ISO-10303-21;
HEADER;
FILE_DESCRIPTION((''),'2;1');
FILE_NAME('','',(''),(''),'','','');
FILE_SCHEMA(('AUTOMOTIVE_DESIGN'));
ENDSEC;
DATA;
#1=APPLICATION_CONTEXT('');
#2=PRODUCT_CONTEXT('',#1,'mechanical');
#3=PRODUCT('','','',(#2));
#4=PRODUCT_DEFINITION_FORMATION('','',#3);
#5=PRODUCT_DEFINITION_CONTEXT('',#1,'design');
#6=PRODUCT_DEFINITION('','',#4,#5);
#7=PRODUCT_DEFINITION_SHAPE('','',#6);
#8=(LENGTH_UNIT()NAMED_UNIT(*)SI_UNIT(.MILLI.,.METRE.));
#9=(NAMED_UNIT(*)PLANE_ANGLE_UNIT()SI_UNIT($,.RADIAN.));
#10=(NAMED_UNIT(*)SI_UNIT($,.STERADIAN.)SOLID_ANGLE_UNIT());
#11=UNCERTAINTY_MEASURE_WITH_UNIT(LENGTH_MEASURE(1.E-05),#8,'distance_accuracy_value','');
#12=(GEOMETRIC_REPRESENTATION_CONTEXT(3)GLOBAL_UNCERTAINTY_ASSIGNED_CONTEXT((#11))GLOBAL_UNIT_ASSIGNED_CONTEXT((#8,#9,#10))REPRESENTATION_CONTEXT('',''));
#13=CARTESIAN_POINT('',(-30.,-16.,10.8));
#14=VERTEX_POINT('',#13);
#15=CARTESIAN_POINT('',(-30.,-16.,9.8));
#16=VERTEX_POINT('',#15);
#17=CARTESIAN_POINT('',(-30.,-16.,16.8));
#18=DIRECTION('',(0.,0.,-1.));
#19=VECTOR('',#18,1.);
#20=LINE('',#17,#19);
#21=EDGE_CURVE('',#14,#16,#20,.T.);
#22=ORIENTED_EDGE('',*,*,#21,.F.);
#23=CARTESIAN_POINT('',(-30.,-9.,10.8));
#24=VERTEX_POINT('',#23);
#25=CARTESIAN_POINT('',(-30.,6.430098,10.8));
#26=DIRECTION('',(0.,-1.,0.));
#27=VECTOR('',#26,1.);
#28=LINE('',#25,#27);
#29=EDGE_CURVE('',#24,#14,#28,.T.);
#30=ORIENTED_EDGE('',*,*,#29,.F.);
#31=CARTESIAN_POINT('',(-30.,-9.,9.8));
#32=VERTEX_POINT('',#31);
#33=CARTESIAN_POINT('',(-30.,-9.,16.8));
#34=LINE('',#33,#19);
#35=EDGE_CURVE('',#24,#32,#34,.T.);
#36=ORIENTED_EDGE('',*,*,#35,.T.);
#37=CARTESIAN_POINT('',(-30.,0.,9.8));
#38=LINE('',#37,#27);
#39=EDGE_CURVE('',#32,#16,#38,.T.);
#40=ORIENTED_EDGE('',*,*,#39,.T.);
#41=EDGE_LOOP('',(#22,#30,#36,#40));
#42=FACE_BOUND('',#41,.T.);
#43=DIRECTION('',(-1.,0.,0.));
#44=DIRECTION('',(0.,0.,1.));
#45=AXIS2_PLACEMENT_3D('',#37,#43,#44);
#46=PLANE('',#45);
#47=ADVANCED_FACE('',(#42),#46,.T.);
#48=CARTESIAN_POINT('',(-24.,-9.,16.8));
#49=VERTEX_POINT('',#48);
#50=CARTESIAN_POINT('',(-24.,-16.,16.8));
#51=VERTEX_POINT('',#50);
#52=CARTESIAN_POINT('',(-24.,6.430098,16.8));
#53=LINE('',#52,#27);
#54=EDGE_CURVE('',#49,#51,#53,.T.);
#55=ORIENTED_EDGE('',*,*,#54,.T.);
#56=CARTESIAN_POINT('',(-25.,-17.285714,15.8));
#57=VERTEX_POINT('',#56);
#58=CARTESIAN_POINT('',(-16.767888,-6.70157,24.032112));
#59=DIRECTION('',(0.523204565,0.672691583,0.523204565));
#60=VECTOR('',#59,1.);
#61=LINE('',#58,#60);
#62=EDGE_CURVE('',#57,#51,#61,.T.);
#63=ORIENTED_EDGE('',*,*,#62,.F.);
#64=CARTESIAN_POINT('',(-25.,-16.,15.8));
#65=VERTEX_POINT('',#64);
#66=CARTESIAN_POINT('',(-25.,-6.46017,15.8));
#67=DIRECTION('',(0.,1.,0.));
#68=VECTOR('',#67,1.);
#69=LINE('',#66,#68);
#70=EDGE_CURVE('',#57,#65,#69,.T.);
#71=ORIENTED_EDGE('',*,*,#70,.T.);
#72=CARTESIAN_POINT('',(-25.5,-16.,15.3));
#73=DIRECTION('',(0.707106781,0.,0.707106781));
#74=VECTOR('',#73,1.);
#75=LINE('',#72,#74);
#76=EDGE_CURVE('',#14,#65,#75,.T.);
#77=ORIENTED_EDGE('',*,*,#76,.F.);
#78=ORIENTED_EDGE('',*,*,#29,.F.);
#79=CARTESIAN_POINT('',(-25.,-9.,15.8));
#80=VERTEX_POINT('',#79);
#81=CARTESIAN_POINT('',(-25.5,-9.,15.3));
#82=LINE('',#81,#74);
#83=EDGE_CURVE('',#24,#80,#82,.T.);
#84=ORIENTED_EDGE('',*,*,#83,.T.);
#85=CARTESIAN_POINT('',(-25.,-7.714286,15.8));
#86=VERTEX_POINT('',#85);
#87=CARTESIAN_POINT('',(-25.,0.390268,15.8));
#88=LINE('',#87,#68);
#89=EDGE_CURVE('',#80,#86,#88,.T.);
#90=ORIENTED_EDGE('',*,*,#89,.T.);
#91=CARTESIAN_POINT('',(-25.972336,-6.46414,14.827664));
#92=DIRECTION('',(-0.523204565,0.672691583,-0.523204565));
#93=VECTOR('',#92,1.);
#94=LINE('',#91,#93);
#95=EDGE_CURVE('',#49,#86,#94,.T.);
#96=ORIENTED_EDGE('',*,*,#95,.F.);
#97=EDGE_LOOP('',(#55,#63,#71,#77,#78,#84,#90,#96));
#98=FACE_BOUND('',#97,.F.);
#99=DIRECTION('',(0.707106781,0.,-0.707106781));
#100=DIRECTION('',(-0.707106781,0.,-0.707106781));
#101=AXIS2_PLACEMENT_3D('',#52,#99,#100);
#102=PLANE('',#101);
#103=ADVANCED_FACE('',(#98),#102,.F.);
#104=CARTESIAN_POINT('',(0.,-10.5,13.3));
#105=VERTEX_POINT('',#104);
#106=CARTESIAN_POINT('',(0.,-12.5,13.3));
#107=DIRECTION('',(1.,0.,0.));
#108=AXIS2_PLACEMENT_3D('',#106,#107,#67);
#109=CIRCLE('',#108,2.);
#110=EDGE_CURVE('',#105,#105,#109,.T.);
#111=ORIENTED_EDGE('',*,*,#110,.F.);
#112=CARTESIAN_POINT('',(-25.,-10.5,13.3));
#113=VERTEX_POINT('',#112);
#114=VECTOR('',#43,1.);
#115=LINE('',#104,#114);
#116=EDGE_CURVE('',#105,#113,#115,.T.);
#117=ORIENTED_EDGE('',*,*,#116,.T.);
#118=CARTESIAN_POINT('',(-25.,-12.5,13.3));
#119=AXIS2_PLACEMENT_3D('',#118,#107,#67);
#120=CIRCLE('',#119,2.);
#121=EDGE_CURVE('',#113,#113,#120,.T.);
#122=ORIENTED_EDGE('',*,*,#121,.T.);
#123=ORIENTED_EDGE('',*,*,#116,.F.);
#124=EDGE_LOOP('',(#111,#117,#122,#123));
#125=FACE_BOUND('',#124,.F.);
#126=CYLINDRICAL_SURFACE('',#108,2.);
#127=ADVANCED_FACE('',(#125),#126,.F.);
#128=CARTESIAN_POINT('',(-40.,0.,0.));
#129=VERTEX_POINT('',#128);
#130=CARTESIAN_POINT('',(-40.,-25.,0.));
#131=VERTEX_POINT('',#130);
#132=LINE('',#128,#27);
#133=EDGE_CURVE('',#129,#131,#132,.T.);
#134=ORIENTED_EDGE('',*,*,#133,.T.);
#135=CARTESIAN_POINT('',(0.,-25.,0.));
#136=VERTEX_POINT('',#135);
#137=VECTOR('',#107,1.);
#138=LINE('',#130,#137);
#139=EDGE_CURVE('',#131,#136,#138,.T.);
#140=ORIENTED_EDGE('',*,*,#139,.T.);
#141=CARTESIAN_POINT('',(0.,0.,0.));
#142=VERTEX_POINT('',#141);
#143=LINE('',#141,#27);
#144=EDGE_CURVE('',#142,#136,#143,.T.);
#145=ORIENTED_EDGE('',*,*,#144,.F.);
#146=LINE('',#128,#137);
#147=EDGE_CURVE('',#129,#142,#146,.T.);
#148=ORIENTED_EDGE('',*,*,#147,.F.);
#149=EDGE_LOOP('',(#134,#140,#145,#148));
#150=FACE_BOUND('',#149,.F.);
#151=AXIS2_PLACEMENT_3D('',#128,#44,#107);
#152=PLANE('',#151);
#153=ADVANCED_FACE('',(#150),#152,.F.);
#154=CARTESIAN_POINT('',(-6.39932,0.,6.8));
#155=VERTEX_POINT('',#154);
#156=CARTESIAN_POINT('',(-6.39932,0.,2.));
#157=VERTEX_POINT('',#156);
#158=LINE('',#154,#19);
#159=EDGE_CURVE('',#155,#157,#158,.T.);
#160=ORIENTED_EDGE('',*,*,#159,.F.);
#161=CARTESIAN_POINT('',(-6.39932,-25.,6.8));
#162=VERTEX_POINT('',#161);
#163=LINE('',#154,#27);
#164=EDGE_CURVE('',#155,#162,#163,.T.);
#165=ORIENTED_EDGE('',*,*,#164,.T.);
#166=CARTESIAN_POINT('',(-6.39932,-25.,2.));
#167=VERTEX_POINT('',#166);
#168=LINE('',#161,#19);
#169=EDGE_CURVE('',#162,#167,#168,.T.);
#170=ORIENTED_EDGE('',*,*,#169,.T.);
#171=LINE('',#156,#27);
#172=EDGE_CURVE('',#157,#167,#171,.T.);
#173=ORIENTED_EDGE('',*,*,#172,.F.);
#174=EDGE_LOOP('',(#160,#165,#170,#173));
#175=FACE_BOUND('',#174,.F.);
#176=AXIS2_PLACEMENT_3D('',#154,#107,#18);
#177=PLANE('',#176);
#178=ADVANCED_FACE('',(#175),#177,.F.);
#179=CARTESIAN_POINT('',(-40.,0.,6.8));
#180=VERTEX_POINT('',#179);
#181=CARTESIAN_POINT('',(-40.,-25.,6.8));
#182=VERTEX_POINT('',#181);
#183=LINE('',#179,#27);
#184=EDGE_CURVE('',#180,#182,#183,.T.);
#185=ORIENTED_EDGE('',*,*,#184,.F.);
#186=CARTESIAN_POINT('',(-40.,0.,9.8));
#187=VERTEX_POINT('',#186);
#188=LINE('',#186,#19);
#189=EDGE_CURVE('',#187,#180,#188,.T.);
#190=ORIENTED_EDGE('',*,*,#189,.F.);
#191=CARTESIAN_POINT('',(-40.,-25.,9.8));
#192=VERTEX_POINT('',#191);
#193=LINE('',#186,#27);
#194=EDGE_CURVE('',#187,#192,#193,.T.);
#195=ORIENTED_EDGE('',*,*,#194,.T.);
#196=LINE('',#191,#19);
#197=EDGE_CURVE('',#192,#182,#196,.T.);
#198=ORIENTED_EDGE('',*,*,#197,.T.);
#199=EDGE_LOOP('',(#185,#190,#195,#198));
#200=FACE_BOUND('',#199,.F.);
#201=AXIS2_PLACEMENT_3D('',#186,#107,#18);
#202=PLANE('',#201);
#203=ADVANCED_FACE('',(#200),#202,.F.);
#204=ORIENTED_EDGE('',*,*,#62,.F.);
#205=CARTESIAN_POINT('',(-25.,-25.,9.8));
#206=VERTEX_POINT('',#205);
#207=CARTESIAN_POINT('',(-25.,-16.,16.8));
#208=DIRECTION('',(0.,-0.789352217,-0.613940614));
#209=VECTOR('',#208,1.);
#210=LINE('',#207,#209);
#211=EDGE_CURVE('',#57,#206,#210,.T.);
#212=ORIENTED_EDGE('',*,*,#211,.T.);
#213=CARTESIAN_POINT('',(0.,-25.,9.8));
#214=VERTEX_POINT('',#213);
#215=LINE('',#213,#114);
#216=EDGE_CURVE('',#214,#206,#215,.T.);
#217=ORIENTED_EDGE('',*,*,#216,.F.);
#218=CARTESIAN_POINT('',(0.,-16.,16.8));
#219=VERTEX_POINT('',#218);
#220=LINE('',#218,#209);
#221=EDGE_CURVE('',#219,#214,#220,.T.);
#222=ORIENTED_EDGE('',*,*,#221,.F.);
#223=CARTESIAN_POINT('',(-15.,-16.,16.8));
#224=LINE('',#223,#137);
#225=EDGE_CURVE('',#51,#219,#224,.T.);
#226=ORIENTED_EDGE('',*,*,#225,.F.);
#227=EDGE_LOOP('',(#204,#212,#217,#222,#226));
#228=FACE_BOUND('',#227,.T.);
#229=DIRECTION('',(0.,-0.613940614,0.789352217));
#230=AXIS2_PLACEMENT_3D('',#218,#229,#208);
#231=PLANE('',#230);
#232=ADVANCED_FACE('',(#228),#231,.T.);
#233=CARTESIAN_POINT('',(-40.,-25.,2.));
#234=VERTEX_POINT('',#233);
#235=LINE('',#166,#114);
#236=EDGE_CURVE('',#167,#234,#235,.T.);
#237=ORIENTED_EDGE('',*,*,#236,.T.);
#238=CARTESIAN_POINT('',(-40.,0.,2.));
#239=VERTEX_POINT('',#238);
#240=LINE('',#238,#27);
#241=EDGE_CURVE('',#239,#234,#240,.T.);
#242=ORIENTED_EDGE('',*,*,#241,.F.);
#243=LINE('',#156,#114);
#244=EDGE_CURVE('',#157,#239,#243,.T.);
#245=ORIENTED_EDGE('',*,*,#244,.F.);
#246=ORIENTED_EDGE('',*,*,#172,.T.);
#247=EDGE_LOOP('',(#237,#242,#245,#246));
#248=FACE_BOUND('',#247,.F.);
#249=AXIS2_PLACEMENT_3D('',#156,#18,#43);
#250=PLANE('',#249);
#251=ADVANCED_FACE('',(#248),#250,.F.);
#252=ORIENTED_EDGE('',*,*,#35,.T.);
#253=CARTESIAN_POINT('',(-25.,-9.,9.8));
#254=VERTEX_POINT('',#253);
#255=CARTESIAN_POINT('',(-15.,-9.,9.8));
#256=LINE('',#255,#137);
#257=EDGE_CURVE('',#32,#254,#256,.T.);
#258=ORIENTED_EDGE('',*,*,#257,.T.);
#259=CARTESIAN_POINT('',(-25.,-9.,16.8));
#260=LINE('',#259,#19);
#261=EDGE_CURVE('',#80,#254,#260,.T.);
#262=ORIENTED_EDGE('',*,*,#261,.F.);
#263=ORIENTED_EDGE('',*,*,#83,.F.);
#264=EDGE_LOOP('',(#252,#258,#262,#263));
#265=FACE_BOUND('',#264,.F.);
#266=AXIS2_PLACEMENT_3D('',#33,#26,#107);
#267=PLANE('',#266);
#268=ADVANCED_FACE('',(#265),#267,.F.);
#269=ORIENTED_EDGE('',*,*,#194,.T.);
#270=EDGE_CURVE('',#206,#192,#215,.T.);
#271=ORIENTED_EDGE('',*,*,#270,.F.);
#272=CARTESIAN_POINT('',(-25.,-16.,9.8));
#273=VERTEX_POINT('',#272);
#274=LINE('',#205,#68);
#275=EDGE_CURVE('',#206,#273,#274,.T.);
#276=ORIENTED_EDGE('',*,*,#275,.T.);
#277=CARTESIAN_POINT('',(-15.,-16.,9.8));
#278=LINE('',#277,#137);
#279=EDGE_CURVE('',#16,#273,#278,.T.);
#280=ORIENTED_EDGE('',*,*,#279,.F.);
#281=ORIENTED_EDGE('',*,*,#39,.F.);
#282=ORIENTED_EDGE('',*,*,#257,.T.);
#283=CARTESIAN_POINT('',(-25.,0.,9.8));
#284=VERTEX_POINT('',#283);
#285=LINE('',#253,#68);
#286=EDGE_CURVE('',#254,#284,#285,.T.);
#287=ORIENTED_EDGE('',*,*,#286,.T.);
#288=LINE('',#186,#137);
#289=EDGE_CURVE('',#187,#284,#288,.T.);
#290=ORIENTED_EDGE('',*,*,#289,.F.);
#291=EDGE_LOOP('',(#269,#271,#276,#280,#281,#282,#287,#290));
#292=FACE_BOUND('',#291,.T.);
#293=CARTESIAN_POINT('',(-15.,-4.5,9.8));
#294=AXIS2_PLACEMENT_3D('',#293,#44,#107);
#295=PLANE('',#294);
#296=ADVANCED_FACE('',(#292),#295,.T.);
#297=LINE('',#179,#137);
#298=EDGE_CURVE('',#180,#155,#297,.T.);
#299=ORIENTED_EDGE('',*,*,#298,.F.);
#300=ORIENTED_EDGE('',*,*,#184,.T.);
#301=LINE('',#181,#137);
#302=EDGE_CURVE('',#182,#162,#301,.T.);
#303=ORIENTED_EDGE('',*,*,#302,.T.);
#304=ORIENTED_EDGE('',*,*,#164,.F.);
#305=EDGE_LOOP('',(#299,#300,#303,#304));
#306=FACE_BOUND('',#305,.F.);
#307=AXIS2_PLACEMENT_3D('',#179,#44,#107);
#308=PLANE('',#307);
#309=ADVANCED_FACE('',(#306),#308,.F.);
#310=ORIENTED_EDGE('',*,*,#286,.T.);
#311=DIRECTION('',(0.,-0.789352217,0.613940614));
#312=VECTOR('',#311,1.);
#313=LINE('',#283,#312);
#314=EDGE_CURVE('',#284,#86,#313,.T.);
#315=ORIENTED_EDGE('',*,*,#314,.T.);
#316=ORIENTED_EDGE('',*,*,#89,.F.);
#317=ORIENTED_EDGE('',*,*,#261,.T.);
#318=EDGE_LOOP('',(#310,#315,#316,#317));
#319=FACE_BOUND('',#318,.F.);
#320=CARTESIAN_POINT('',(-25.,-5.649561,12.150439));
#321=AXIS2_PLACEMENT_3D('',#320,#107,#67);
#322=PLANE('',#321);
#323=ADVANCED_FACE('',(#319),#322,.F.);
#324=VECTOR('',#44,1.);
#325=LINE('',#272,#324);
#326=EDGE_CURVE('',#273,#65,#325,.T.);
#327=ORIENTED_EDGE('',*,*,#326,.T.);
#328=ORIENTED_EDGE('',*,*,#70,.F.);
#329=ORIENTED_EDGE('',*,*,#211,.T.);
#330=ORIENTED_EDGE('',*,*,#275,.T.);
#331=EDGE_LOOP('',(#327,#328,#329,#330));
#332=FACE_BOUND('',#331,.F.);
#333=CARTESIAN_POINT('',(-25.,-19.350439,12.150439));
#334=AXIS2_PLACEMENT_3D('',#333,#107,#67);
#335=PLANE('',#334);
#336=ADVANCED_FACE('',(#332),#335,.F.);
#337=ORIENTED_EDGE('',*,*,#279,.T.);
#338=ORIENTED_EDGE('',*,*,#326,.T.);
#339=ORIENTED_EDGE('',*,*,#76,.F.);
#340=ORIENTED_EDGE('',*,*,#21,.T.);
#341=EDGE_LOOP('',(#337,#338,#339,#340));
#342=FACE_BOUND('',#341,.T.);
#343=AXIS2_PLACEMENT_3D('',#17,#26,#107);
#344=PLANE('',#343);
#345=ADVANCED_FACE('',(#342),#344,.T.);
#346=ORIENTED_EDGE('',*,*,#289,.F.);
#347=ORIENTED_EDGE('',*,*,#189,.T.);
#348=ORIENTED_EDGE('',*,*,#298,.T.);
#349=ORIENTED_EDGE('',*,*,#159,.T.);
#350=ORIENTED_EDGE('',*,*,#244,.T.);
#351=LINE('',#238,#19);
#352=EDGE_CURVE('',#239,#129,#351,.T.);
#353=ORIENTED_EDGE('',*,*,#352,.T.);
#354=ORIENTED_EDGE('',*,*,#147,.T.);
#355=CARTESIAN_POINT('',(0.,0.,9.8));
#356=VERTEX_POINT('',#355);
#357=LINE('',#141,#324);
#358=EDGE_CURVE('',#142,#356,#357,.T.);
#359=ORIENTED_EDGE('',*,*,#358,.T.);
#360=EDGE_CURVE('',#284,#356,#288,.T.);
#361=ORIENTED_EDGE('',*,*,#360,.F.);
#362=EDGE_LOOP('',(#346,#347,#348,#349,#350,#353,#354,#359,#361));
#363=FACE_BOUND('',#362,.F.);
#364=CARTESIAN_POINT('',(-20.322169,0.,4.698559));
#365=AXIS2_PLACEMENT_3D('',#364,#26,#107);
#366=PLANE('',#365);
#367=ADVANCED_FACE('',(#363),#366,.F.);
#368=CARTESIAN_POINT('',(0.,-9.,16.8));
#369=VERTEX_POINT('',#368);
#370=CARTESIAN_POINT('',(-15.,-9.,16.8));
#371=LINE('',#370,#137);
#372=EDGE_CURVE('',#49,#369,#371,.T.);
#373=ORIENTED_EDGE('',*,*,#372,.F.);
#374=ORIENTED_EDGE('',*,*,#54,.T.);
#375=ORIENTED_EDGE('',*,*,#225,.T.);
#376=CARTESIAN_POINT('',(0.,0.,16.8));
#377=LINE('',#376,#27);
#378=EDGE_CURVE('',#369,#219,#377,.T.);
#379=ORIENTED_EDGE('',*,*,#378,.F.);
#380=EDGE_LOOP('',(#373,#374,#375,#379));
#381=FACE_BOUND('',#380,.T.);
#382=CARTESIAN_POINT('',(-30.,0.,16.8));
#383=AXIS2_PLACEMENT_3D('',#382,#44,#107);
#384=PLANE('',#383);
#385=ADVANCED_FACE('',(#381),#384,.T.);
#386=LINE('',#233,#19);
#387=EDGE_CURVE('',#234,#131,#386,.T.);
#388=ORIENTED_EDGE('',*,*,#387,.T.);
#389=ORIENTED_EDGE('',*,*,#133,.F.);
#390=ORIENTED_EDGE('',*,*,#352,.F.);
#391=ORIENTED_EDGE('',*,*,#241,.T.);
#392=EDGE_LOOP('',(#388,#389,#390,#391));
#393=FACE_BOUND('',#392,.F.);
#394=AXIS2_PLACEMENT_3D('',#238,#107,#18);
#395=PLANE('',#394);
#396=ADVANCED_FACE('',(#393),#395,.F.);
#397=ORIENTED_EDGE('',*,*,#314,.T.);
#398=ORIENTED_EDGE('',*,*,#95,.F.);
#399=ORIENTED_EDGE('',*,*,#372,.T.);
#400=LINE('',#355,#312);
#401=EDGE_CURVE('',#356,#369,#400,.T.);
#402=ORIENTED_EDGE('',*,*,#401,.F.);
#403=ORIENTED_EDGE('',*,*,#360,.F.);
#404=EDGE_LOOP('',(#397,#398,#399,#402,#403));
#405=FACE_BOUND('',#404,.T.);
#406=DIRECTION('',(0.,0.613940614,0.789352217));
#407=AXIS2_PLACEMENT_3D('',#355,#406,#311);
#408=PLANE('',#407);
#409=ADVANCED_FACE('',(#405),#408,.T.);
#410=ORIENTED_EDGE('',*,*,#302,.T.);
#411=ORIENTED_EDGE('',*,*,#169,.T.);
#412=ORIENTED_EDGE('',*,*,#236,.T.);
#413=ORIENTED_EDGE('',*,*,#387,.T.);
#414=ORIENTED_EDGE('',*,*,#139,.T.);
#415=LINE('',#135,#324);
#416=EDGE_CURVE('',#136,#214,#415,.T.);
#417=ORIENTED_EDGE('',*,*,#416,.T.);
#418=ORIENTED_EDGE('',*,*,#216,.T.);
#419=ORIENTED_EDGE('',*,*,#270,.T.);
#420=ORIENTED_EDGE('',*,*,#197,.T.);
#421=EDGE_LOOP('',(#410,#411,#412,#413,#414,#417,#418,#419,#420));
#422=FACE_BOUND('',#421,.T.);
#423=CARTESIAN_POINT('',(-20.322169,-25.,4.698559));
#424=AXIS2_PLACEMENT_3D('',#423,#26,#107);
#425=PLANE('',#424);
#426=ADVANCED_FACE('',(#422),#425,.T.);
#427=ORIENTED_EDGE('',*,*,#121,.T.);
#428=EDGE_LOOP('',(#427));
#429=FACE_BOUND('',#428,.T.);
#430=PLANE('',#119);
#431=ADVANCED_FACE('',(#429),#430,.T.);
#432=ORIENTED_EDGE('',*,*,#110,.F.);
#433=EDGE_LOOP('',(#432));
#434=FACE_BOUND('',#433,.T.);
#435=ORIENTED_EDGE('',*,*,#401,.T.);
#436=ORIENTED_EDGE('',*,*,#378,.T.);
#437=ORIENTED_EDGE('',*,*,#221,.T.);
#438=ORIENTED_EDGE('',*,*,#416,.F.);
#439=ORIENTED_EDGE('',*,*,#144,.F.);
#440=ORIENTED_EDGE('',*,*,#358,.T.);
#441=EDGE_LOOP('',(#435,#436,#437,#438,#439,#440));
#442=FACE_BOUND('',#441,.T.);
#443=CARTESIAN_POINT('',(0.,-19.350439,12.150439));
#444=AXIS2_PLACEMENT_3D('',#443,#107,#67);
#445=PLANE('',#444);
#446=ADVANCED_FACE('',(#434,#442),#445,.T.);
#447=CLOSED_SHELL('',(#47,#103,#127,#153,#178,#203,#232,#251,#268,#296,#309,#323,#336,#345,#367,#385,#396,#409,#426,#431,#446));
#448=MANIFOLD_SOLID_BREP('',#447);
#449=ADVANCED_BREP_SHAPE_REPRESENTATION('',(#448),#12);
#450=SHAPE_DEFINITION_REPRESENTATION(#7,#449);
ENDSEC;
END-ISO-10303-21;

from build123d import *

# Parameters (mm, degrees)
F0_W        = 30
F0_H        = 7
F1_DEPTH    = 25
F2_W        = 30
F2_H        = 9
F3_DEPTH    = 7
F4_R        = 2
F5_DEPTH    = 25
F7_DEPTH    = 25
F8_T1_DEPTH = 37.8601958556


# Not quite as in the source:
# - a fillet or chamfer that OpenCascade refuses, or shapes differently, is made with other operations: its cross-section is extruded or revolved along the edge and cut away or added


with BuildPart() as f1:
    # F0 (on Front) → F1 (new body)
    with BuildSketch(Plane.XZ):
        Polygon((-40, 0), (0, 0), (0, 9.8), (-30, 9.8), (-40, 9.8), (-40, 6.8), (-6.3993203272, 6.8), (-6.3993203272, 2), (-40, 2), align=None)
        with Locations((-15, 13.3)):
            Rectangle(F0_W, F0_H)
    extrude(amount=F1_DEPTH)

    # F2 (on face) → F3 (cut)
    with BuildSketch(Plane.XY.offset(16.8)):
        with Locations((-15, -4.5)):
            Rectangle(F2_W, F2_H)
        with Locations((-15, -20.5)):
            Rectangle(F2_W, F2_H)
    extrude(amount=-F3_DEPTH, mode=Mode.SUBTRACT)

    # F4 (on face) → F5 (cut)
    with BuildSketch(Plane.YZ):
        with Locations((-12.5, 13.3)):
            Circle(F4_R)
    extrude(amount=-F5_DEPTH, mode=Mode.SUBTRACT)

    # F6 (on face) → F7 (join)
    with BuildSketch(Plane.YZ):
        Polygon((-16, 16.8), (-25, 9.8), (-16, 9.8), align=None)
        Polygon((0, 9.8), (-9, 16.8), (-9, 9.8), align=None)
    extrude(amount=-F7_DEPTH)

    # F8: chamfer of 6 on 1 edges, made by hand

    # F8_s2 → F8_t1 (cut)
    with BuildSketch(Plane.XZ.offset(-6.4300979278)):
        Polygon((-24, 16.8), (-30, 10.8), (-30, 16.8), align=None)
    extrude(amount=F8_T1_DEPTH, mode=Mode.SUBTRACT)


solid = f1.part
